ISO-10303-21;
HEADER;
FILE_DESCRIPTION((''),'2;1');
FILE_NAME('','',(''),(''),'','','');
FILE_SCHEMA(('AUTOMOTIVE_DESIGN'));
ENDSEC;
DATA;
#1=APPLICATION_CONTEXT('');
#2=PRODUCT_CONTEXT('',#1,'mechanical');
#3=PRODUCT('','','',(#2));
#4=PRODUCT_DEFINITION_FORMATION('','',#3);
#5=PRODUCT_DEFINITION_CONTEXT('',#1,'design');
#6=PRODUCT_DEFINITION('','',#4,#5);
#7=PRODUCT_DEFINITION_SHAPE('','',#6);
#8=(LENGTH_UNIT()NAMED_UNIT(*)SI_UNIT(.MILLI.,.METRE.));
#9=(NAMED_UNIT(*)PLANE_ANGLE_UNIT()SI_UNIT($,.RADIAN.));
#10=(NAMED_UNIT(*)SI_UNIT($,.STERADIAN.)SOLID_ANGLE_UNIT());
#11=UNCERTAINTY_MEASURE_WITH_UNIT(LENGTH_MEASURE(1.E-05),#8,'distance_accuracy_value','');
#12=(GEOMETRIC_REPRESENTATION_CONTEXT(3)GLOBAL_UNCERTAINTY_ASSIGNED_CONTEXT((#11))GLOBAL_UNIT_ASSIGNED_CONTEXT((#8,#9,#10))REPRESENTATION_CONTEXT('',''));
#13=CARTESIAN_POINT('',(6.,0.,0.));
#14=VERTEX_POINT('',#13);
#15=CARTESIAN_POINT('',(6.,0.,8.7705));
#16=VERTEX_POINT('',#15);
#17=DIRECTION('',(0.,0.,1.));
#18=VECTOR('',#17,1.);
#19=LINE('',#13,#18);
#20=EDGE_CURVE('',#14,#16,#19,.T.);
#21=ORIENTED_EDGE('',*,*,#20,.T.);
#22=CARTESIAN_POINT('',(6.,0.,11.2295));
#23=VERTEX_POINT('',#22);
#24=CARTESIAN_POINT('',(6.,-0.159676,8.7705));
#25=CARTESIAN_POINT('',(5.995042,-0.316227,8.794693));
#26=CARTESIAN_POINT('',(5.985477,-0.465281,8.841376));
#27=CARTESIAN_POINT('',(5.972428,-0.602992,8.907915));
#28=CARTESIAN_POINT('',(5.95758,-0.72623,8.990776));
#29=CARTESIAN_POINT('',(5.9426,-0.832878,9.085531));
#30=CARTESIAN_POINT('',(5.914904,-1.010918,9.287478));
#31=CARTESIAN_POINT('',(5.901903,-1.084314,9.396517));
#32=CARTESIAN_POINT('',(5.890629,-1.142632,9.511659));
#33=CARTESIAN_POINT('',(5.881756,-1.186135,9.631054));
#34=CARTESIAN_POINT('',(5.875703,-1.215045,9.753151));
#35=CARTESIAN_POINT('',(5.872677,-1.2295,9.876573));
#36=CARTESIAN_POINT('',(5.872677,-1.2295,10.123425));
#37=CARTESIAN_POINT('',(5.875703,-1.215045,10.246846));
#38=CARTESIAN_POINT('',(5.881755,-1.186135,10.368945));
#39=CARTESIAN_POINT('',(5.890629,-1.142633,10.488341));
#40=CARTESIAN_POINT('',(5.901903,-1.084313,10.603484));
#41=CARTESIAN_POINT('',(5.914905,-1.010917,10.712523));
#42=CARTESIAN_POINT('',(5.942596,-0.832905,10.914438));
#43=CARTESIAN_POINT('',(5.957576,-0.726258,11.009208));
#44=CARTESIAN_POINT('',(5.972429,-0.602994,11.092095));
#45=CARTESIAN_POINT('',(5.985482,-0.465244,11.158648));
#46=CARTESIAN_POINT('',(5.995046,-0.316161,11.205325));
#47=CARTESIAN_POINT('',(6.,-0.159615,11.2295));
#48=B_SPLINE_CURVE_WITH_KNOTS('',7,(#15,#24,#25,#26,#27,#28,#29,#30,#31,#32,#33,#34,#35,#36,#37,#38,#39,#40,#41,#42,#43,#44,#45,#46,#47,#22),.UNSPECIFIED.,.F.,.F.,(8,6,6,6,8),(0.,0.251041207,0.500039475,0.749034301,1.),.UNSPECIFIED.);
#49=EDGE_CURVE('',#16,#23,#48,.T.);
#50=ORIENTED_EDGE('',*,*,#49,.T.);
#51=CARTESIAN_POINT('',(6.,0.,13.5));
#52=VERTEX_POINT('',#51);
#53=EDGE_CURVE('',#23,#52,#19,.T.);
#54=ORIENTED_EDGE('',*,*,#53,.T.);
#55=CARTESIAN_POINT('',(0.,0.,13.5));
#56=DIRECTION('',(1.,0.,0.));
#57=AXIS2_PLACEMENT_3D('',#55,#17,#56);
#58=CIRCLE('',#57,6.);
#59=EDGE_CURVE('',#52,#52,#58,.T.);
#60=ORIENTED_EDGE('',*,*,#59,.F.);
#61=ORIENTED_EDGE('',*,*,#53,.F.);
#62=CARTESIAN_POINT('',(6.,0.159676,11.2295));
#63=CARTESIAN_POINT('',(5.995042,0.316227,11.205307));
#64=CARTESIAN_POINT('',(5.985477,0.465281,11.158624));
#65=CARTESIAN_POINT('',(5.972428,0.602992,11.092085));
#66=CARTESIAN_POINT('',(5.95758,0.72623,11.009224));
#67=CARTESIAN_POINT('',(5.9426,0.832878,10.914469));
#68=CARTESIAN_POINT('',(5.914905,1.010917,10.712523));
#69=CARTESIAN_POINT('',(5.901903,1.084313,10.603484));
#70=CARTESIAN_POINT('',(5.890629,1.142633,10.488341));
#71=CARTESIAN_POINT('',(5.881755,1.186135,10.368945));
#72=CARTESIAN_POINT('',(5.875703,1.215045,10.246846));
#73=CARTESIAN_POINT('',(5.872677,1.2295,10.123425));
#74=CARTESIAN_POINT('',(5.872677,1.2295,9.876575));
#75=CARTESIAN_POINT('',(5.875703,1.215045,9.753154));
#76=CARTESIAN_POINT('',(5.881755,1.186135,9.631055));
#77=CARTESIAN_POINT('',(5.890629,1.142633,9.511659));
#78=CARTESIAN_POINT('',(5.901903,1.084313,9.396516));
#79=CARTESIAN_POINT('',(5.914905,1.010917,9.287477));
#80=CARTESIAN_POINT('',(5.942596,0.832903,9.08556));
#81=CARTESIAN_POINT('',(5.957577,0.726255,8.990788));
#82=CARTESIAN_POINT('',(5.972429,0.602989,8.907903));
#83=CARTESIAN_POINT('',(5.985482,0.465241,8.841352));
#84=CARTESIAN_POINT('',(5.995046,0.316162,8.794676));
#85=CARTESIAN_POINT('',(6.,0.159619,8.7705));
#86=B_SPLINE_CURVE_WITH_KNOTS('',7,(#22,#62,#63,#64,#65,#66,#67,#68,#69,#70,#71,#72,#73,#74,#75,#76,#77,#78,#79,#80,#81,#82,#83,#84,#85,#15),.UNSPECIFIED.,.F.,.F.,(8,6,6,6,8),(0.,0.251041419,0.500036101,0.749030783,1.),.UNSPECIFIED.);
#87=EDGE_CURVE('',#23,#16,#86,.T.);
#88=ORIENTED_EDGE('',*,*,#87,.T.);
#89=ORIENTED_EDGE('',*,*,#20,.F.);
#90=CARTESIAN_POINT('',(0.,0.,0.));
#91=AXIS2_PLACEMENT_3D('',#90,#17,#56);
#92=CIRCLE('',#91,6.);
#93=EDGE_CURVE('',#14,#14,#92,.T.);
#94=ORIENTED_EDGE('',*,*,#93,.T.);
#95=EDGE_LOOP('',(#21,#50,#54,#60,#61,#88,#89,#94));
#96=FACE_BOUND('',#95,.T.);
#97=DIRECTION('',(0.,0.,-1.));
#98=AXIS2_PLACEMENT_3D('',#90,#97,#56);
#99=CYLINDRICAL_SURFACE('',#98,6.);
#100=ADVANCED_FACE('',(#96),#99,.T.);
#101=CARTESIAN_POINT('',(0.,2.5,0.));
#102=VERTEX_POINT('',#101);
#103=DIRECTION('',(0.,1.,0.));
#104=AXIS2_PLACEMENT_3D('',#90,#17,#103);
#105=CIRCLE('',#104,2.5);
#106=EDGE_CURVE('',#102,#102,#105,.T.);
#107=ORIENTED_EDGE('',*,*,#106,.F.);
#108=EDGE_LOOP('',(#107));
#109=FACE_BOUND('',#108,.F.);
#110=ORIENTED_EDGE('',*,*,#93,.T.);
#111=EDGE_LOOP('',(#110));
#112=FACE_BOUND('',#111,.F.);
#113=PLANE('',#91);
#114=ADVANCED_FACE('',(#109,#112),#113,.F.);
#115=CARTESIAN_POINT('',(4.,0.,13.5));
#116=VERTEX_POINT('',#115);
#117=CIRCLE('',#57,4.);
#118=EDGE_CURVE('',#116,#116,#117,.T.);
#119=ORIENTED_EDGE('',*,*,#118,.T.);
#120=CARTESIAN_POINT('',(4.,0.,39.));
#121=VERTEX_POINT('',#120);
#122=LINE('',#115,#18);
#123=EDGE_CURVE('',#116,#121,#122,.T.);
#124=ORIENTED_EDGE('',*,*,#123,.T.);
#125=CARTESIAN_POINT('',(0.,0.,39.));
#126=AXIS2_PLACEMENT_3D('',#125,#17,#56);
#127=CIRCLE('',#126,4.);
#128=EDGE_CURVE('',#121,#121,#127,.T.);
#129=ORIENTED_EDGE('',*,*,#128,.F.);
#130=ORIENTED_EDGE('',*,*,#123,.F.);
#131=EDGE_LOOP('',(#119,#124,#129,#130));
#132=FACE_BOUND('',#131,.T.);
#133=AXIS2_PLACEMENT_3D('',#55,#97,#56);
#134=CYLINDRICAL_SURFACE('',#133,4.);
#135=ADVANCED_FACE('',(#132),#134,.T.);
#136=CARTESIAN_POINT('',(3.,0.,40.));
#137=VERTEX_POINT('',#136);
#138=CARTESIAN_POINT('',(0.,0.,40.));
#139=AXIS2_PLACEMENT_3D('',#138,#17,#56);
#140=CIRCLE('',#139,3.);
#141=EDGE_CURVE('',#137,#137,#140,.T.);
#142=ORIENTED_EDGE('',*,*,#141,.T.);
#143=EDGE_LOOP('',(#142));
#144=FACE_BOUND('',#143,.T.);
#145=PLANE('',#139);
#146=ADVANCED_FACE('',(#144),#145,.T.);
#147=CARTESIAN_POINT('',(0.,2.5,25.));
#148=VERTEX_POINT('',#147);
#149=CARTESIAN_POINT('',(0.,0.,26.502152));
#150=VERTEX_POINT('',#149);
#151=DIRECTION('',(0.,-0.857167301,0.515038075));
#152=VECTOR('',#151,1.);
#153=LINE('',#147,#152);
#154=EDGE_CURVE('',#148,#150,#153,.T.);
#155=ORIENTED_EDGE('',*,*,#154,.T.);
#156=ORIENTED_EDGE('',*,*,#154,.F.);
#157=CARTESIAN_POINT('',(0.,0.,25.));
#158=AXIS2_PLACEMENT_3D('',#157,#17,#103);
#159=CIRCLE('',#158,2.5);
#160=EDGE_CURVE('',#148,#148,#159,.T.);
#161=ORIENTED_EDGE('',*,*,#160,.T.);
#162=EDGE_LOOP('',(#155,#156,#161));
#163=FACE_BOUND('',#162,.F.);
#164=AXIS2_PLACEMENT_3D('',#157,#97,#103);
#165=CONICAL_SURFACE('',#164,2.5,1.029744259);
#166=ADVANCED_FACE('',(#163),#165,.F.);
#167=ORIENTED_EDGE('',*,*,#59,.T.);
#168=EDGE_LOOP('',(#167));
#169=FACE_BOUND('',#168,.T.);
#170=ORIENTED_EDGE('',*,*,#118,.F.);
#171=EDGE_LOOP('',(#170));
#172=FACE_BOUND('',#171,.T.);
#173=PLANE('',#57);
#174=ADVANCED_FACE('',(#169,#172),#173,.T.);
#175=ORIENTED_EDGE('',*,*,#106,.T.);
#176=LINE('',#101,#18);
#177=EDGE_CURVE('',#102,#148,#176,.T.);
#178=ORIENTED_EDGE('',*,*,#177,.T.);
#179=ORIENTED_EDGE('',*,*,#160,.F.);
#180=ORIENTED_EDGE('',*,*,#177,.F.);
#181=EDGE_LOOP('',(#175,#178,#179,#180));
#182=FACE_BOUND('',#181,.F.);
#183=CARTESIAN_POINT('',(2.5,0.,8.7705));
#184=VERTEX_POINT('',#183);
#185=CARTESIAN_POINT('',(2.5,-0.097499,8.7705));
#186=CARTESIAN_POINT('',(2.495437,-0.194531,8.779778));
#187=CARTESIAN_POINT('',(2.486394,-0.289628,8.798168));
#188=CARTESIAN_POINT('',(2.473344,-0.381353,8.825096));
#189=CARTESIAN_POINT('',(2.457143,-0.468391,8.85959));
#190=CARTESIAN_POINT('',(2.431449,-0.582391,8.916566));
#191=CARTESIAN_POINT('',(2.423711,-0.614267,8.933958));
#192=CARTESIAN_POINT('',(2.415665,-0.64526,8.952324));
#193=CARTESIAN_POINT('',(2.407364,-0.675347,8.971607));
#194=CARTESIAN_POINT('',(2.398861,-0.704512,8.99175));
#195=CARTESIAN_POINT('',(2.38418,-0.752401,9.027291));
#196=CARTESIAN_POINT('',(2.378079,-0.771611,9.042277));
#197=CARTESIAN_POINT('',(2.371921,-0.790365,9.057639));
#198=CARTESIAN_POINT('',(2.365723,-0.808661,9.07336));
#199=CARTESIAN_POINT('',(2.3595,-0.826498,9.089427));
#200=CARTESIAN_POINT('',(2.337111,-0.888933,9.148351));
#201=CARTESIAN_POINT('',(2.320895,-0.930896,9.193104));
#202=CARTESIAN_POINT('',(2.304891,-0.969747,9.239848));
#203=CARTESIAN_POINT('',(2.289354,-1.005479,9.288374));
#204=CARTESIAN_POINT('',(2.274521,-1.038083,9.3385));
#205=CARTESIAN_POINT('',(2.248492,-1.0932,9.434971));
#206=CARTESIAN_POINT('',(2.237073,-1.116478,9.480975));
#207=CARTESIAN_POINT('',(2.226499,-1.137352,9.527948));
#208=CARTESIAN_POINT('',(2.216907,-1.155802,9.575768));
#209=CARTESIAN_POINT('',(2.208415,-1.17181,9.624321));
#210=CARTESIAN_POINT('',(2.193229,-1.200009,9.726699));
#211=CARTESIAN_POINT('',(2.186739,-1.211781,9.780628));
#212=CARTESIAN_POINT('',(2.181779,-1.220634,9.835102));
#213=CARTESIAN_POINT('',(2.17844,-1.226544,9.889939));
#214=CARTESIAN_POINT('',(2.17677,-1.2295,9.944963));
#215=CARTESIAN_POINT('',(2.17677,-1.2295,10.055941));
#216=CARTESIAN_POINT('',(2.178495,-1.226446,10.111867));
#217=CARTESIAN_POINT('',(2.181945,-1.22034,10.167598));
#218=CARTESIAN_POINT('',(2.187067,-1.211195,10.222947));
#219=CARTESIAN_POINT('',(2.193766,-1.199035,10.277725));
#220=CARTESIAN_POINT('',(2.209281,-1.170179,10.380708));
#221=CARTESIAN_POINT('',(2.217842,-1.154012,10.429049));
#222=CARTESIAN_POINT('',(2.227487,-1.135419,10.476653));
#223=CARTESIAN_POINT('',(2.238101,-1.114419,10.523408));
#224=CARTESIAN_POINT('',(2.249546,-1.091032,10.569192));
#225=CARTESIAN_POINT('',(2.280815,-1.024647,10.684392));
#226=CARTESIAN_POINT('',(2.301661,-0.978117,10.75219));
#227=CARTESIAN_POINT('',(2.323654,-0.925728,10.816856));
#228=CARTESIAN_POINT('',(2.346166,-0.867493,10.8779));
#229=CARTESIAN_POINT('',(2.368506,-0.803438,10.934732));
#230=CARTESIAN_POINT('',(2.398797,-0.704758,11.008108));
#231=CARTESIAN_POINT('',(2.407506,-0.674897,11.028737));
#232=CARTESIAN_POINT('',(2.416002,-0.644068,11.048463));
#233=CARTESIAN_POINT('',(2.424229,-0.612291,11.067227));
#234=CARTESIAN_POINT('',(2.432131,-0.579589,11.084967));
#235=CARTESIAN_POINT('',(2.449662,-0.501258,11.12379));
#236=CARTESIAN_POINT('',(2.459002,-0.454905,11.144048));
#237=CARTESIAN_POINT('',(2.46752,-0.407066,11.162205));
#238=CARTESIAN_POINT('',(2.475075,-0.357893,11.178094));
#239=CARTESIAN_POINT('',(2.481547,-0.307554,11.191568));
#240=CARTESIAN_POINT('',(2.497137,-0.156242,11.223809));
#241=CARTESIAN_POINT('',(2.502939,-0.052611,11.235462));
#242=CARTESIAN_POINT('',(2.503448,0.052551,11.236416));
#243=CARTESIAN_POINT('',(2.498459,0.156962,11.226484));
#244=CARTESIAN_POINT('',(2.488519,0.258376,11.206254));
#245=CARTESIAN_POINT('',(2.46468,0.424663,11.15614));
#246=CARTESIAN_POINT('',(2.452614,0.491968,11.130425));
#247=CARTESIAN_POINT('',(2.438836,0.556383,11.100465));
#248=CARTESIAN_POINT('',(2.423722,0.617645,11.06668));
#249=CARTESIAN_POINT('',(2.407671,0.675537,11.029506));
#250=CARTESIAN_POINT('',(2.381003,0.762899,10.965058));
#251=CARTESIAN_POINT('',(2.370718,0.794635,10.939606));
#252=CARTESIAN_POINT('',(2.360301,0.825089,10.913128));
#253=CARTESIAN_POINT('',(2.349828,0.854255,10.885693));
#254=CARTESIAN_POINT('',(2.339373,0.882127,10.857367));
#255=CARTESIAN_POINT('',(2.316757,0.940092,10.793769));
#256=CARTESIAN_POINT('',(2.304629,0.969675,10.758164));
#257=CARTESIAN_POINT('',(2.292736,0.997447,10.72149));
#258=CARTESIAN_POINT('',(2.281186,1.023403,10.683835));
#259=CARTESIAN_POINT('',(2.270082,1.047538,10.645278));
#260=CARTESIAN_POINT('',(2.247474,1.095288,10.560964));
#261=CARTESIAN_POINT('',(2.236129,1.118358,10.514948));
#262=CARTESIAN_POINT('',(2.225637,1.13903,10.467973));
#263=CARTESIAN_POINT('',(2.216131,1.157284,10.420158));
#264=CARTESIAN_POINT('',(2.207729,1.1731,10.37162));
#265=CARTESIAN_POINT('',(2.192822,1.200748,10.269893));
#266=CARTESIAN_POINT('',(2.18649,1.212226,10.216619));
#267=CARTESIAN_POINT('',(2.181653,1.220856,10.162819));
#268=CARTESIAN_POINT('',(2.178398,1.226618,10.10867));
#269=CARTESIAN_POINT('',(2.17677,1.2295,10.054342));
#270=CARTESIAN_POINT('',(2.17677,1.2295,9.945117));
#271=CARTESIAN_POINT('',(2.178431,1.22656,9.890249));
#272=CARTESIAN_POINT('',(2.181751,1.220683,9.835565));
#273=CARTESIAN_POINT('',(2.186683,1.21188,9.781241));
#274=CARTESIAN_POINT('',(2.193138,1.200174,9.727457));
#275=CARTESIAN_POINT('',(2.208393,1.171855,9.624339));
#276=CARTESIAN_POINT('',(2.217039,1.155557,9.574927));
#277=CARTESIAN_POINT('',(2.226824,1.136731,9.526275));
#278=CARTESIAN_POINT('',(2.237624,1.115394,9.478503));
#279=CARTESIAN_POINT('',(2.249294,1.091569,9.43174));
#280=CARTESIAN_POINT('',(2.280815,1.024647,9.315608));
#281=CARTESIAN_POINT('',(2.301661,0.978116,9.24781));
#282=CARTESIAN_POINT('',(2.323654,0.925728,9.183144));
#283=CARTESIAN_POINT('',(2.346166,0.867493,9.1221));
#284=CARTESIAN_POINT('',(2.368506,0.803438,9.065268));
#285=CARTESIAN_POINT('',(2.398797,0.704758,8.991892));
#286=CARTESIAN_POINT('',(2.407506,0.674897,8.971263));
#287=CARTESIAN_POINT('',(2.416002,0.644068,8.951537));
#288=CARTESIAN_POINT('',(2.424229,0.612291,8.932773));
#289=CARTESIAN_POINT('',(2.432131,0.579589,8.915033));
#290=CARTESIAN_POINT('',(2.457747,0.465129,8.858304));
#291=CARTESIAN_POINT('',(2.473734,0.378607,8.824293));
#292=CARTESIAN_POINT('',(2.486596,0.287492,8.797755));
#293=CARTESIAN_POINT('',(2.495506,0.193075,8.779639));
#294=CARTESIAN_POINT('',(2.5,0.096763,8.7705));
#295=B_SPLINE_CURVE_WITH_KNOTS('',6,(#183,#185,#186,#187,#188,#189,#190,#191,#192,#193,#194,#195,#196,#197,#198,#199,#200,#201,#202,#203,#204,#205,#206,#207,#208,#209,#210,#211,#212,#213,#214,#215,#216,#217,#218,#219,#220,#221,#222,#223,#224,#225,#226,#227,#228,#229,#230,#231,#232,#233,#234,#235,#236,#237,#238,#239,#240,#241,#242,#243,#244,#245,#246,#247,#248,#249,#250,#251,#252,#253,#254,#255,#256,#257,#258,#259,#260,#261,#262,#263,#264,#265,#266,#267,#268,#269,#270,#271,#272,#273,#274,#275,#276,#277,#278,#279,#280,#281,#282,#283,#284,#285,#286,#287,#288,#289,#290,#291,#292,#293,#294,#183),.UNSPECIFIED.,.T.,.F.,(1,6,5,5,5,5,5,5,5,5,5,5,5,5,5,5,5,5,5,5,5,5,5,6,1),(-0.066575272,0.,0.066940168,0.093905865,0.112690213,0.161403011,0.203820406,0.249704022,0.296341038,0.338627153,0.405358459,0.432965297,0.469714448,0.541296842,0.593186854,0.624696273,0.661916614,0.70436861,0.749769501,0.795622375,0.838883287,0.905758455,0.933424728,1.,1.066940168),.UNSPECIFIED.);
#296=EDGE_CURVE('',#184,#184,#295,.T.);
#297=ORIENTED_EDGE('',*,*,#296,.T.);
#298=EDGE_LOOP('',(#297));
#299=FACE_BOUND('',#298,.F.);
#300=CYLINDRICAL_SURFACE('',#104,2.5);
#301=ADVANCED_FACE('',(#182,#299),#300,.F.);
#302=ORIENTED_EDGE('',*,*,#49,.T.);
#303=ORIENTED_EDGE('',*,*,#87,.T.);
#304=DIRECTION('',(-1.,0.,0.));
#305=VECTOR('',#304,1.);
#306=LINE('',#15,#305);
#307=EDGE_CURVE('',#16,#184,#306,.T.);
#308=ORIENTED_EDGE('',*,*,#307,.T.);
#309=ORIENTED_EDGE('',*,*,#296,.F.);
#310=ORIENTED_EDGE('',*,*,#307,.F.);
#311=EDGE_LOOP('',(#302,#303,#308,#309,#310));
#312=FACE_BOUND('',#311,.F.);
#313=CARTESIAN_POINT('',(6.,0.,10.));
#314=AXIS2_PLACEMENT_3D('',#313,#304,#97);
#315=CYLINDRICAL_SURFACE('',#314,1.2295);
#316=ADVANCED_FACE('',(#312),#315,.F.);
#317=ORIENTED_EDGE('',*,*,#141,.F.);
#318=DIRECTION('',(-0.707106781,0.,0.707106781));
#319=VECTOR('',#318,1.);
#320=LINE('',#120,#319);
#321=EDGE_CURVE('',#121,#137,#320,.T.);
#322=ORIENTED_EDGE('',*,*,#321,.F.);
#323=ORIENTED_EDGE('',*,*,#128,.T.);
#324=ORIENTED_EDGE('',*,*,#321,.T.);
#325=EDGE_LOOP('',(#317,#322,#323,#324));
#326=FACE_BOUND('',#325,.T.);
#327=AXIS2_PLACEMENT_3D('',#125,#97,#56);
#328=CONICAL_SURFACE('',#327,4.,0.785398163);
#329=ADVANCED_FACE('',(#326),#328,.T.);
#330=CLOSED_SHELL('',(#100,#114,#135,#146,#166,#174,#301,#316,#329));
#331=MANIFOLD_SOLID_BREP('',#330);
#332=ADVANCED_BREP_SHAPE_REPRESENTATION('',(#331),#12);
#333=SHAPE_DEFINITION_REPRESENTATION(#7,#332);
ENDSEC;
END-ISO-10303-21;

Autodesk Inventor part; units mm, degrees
ref_plane "XZ Plane" through (0, 0, 0) normal (0, 1, 0) x (-1, 0, 0)
ref_plane "XY Plane" through (0, 0, 0) normal (0, 0, 1) x (1, 0, 0)
sketch "Skizze1" plane through (0, 0, 0) normal (0, 0, 1) x (1, 0, 0)
  circle A0 centre (0, 0) radius 6
  dimension "d0" = 12
extrude "Extrusion1" add sketch "Skizze1" along normal blind 13.5
sketch "Skizze2" plane through (0, 0, 13.5) normal (0, 0, 1) x (1, 0, 0)
  circle A0 centre (0, 0) radius 6 projected
  circle A1 centre (0, 0) radius 4
  dimension "d3" = 8
extrude "Extrusion2" add sketch "Skizze2" along normal blind 26.5 contours A1
sketch "Skizze3" plane through (0, 0, 0) normal (0, 0, -1) x (-1, 0, 0)
  circle A0 centre (0, 0) radius 6 projected
hole "Bohrung1" at (0, 0, 0) direction (0, 0, 1) diameter 5 depth 25 tip angle 118
ref_plane "Arbeitsebene1" through (6, 0, 0) normal (1, 0, 0) x (0, 1, 0)
sketch "Skizze4" plane through (6, 0, 0) normal (1, 0, 0) x (0, 1, 0)
  line L0 (-8.4, 0) -> (8.4, 0) projected
  line L1 (0, -2.7) -> (0, 16.2) projected
  point P0 (0, 0)
  point P1 (0, 10)
  dimension "d13" = 10
hole "Bohrung2" at (6, 0, 10) direction (-1, 0, 0) diameter 2.459 end up to surface thread size "M3x0.5" class "6H" standard "ISO Metric profile"
chamfer "Fase1" distance 1 angle 45 1 edges at (-4, 0, 40)
properties part number "13_0204_062"
